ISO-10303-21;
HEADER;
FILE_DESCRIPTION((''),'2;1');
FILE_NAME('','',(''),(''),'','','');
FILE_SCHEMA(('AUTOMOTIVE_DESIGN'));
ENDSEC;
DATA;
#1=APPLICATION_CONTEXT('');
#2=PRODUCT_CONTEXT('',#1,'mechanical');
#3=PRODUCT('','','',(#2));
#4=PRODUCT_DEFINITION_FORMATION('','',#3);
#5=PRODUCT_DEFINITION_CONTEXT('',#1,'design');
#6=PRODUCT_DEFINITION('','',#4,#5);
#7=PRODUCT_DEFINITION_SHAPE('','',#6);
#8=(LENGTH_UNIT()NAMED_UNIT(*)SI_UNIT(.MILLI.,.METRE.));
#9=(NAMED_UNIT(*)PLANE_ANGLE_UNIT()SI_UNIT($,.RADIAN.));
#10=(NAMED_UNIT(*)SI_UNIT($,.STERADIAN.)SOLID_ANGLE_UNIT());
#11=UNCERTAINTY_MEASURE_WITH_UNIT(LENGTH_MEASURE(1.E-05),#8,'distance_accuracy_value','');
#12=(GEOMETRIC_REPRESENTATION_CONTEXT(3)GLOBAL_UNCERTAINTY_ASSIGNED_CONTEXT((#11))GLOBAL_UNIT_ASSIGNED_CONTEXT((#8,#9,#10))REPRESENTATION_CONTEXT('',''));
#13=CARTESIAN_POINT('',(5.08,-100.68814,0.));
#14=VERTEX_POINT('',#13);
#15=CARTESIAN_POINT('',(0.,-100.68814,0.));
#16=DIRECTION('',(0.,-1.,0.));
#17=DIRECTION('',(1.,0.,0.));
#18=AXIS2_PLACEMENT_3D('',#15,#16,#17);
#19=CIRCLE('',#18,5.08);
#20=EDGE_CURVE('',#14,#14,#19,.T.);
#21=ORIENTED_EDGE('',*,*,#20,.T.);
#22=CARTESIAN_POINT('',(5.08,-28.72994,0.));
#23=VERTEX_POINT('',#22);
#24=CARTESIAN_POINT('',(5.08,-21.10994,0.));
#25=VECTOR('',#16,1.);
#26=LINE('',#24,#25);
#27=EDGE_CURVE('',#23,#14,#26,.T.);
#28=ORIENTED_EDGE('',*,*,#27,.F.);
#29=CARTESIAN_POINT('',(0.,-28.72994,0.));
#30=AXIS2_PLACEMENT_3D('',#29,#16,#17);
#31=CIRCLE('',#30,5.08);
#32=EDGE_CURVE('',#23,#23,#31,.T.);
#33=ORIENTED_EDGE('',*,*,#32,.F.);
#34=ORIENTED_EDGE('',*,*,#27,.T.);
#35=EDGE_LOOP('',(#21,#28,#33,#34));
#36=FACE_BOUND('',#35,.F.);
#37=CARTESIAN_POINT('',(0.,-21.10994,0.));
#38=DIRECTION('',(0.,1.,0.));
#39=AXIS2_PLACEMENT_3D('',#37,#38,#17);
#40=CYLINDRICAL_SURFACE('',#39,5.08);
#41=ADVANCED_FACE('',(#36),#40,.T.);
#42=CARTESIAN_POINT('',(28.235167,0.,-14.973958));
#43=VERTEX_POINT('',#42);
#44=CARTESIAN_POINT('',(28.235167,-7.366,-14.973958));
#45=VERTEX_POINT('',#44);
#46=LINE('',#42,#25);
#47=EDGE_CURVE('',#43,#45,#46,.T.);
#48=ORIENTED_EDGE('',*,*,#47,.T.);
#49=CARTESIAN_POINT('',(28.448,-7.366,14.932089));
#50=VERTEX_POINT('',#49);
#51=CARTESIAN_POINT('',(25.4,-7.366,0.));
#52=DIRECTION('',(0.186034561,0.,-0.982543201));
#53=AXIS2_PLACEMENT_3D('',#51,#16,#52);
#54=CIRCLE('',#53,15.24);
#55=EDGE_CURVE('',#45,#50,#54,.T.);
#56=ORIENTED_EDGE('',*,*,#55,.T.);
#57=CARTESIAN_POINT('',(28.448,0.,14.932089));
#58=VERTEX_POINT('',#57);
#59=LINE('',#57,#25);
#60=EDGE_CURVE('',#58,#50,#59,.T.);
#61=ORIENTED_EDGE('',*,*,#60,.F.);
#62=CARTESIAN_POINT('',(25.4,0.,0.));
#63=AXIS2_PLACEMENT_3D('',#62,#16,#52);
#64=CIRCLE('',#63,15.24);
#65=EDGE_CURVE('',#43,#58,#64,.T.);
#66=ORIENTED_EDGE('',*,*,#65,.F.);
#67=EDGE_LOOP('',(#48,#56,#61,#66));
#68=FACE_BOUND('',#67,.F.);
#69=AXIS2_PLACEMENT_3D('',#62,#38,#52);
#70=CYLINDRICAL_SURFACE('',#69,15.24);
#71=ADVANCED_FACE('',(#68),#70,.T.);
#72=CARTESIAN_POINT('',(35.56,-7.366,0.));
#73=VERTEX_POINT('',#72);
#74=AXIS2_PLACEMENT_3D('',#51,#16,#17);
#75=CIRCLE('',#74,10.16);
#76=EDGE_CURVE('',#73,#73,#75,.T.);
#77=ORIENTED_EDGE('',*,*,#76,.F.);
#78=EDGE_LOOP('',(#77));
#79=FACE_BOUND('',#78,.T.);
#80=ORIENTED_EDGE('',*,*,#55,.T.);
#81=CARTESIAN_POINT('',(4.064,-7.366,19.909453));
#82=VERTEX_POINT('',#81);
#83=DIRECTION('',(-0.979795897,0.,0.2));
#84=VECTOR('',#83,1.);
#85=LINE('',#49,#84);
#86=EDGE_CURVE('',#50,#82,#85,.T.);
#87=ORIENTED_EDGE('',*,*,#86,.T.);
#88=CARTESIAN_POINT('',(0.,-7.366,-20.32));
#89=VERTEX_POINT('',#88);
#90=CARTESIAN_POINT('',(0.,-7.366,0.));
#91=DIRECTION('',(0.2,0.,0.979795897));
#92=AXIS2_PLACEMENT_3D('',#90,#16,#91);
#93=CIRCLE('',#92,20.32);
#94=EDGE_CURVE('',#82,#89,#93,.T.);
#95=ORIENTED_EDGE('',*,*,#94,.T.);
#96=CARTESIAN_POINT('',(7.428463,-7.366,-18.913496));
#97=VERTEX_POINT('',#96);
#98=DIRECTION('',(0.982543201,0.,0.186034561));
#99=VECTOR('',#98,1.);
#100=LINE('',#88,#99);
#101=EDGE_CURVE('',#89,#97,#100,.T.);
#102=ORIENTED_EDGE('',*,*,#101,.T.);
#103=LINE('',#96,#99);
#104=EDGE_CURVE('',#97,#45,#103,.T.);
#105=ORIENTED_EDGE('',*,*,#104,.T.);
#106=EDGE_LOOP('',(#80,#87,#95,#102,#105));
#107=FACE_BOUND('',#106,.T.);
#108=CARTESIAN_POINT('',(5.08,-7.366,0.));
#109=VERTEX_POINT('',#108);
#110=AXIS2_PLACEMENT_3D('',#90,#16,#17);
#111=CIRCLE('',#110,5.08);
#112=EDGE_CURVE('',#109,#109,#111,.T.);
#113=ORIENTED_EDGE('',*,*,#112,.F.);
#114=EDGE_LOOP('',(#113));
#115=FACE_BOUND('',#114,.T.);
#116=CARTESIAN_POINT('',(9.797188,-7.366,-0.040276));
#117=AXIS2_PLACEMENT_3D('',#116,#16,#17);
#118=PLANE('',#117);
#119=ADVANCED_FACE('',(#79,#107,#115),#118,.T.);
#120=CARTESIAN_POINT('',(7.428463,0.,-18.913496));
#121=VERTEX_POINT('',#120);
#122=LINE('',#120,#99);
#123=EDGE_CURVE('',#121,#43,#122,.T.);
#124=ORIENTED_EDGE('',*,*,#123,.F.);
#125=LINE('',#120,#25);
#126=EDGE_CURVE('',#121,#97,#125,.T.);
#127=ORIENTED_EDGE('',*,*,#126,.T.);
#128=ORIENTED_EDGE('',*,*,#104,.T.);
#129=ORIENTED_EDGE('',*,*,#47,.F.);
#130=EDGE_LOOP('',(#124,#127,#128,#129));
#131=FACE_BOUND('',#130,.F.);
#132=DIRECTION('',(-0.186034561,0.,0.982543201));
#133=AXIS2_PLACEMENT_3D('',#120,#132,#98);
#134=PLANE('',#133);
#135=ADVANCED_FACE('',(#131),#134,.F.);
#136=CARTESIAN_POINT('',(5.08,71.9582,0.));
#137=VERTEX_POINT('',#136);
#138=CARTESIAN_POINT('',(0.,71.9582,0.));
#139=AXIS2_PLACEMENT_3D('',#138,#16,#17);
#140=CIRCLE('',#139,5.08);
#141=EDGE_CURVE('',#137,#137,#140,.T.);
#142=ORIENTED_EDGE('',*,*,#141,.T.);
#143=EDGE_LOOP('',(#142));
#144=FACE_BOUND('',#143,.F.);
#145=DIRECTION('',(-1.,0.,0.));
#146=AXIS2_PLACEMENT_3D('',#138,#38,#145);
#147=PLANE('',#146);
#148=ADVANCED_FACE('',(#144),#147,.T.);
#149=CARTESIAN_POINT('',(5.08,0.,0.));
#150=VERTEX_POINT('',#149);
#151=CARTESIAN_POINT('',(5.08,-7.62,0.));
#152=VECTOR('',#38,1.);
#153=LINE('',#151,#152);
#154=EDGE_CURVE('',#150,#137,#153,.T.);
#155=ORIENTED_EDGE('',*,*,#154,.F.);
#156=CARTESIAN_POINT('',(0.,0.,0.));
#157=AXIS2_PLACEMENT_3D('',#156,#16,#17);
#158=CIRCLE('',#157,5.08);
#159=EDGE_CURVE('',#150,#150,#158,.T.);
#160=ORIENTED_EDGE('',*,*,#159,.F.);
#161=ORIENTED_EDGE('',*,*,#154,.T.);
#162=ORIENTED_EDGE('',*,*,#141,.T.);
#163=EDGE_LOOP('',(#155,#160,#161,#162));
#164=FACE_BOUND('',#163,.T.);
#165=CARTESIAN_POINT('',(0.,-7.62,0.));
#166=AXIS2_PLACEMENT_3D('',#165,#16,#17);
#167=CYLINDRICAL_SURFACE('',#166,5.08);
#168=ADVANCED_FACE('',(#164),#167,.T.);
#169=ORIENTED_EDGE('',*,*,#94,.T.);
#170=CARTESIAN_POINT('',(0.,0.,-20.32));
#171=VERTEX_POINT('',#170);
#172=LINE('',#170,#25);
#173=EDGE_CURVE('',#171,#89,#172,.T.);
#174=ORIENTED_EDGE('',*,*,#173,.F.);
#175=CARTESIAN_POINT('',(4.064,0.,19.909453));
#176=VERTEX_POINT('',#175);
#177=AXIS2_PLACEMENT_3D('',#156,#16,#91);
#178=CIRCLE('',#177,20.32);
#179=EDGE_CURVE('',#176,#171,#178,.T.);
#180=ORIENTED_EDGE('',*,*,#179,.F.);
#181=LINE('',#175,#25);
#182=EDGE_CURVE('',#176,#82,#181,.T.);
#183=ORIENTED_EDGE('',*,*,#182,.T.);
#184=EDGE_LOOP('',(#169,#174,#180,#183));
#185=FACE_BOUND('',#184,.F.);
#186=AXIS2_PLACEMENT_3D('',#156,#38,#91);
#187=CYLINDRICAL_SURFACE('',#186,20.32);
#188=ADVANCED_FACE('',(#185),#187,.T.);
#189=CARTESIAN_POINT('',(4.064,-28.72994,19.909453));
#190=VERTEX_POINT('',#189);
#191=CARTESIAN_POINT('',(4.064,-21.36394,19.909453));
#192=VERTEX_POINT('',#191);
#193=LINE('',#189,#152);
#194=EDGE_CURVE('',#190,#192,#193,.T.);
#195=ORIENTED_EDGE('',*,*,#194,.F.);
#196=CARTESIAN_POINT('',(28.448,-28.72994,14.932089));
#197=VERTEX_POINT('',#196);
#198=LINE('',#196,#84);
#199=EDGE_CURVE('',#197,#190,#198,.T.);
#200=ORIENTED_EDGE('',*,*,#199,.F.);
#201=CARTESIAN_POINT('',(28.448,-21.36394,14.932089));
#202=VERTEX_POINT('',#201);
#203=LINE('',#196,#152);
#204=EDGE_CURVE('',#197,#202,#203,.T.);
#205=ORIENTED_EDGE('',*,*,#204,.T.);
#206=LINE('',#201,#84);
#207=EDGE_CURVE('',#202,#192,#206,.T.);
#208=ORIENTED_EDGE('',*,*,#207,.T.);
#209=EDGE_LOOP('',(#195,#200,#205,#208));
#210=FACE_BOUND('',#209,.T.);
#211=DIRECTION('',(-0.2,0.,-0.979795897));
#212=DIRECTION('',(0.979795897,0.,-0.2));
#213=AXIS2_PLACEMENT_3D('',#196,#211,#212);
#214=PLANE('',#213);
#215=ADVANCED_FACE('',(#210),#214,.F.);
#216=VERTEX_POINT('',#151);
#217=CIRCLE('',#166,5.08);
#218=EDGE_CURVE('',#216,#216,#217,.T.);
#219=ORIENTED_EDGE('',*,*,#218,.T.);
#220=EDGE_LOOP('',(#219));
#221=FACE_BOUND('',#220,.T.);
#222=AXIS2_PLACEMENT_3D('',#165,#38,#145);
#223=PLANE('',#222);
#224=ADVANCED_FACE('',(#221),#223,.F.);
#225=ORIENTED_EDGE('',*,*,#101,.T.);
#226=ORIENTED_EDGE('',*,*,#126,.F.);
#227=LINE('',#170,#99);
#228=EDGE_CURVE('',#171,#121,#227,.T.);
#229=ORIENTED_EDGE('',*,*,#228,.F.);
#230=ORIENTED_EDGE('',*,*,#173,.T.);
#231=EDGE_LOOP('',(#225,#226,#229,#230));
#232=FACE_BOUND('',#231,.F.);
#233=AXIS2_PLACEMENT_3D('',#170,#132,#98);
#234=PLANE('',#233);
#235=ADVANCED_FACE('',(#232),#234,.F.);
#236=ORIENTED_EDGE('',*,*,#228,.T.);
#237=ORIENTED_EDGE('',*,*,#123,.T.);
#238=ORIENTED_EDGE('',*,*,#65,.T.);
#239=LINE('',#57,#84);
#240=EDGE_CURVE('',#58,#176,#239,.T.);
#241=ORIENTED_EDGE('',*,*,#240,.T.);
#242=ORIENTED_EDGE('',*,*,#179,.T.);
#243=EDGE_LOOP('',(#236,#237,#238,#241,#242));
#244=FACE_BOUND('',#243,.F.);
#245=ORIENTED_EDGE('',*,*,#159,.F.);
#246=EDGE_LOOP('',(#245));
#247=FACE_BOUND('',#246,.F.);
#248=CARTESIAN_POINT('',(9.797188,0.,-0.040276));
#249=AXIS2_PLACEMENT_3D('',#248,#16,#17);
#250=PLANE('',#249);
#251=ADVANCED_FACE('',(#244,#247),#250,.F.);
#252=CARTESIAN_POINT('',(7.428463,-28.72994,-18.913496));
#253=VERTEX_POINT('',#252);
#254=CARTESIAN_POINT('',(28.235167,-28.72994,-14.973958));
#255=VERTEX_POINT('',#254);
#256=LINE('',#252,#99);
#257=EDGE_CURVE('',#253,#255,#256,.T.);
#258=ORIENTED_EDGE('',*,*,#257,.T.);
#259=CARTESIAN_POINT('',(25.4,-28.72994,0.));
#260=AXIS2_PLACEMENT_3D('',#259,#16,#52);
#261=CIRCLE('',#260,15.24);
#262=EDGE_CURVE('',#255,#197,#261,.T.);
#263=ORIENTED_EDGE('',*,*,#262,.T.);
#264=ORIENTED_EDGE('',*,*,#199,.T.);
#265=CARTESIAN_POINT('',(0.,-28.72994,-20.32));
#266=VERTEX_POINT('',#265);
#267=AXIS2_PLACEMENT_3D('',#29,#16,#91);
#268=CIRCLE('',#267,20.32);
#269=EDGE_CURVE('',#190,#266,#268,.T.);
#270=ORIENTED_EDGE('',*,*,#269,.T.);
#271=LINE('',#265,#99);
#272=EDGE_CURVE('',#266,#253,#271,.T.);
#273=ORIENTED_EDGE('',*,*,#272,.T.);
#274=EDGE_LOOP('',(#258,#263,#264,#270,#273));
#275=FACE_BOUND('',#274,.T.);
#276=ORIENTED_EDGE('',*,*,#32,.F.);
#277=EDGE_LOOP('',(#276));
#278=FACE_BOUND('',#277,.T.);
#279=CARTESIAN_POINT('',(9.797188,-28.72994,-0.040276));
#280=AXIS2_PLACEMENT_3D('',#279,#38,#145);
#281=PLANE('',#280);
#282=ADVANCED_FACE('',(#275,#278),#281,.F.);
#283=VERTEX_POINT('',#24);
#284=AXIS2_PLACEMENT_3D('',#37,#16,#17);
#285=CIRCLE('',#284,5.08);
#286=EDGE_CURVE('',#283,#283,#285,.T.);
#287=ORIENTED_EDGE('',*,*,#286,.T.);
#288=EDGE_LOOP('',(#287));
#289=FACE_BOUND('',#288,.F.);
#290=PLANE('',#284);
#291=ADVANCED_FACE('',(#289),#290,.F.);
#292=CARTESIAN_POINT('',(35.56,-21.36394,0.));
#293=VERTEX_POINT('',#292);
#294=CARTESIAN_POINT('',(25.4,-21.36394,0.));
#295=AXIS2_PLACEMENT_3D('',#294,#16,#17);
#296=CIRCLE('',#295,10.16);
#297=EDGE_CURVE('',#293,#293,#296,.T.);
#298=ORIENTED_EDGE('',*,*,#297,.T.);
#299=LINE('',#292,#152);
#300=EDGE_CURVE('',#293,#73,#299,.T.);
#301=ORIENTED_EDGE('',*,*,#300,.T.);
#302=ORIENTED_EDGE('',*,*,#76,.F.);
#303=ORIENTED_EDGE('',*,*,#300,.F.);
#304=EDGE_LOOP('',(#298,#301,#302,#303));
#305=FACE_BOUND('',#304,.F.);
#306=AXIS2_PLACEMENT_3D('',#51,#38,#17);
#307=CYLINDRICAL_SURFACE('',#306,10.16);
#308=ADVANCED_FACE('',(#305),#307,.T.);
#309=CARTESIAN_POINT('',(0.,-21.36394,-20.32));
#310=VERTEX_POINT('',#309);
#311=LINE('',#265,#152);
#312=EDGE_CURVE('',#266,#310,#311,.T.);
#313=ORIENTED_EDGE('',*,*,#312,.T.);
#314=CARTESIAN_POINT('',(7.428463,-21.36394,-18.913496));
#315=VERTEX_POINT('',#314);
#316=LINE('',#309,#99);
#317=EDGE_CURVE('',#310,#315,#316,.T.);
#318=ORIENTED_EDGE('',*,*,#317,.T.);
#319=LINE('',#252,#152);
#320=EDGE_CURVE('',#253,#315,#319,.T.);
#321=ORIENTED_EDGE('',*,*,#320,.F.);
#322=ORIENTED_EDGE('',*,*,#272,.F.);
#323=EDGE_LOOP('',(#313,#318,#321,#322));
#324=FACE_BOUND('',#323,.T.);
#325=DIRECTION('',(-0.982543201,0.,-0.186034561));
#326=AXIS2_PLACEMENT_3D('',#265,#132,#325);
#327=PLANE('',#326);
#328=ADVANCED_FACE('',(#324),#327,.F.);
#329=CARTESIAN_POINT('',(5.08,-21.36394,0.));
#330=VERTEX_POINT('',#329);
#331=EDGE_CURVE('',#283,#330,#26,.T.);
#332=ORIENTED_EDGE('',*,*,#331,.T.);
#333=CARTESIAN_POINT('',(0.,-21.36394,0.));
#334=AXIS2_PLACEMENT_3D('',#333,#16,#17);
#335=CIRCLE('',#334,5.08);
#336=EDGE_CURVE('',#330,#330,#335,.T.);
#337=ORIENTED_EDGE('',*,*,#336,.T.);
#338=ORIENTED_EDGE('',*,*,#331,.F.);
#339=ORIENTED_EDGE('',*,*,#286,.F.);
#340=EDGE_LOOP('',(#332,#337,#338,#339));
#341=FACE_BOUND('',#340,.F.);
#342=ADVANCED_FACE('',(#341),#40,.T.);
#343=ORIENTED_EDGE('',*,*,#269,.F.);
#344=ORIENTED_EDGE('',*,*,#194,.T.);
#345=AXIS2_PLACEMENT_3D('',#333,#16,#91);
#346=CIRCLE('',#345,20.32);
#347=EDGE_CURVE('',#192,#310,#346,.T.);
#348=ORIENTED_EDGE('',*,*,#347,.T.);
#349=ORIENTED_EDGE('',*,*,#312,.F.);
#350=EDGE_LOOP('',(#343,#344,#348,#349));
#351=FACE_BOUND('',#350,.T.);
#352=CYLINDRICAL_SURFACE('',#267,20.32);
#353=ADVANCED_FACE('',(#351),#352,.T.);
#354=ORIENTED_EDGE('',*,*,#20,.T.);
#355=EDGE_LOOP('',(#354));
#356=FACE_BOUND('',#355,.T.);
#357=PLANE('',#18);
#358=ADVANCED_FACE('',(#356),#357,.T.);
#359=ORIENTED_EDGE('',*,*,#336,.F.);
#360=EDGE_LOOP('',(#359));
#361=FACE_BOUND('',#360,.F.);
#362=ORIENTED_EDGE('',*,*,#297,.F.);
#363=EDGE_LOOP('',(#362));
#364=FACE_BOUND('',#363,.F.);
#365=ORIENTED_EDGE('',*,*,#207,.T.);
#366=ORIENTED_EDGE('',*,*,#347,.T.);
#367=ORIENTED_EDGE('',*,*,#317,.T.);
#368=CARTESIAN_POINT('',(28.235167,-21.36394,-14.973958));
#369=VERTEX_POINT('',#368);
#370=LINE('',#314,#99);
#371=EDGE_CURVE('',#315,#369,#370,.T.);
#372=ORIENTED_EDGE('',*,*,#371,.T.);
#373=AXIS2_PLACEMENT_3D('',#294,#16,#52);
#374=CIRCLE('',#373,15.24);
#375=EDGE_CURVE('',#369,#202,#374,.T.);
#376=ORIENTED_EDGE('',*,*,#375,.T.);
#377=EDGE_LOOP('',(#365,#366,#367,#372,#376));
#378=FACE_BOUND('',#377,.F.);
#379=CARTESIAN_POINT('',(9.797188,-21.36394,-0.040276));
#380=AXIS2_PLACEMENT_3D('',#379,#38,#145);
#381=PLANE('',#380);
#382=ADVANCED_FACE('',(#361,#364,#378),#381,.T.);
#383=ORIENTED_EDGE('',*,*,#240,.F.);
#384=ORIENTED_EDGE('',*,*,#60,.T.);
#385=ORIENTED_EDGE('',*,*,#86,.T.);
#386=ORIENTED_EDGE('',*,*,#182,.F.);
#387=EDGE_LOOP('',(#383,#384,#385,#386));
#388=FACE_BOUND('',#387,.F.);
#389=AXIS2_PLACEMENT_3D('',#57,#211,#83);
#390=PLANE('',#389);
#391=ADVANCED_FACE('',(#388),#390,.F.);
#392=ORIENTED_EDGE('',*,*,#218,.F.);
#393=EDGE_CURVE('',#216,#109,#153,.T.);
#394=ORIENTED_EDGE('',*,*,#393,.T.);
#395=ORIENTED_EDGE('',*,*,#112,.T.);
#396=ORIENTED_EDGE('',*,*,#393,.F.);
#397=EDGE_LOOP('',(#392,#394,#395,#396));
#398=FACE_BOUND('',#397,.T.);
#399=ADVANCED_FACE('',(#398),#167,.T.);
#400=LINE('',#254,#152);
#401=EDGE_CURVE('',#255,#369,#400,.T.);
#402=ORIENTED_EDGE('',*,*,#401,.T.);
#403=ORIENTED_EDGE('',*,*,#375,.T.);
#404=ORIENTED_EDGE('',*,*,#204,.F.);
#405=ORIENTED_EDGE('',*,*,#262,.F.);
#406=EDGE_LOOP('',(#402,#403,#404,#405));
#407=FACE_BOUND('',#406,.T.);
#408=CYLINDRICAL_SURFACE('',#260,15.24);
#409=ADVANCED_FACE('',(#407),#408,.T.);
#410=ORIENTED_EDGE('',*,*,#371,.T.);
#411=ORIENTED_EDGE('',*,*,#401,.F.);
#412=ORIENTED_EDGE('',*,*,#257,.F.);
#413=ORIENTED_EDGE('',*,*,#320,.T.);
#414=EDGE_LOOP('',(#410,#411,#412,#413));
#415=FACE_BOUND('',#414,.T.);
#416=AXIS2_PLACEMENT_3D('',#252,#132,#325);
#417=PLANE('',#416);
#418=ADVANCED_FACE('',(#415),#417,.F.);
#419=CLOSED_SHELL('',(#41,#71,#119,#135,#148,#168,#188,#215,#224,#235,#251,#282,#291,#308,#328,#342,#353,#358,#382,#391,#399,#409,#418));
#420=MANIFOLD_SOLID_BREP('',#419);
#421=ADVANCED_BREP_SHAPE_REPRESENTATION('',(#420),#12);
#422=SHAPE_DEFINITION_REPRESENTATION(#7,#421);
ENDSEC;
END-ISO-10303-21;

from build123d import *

# Parameters (mm, degrees)
F0_R     = 5.08
F0_R_2   = 10.16
F1_DEPTH = 7.366
F2_R     = 10.16
F3_DEPTH = 6.99897
F7_R     = 5.08
F8_DEPTH = 79.5782


# Not quite as in the source:
# - a length typed as a fraction of an inch, garbled in the dataset ("3 / 203.2 mm" for 3/8 in), is restored


with BuildPart() as f1:
    # F0 (on Front) → F1 (new body)
    with BuildSketch(Plane.XZ):
        with BuildLine():
            Line((28.448, 14.932089472), (4.064, 19.9094526293))
            ThreePointArc((4.064, 19.9094526293), (-20.2171026291, 2.0423421079), (0, -20.32))
            Line((0, -20.32), (7.4284633963, -18.9134960166))
            Line((7.4284633963, -18.9134960166), (28.2351667085, -14.9739583856))
            ThreePointArc((28.2351667085, -14.9739583856), (40.639614078, -0.1084562307), (28.448, 14.932089472))
        make_face()
        Circle(F0_R, mode=Mode.SUBTRACT)
        with Locations((25.4, 0)):
            Circle(F0_R_2, mode=Mode.SUBTRACT)
        with Locations((25.4, 0)):
            Circle(F0_R_2)
    extrude(amount=F1_DEPTH)

    # F2 (on face) → F3 (join)
    with BuildSketch(Plane.XZ.offset(7.366)):
        with Locations((25.4, 0)):
            Circle(F2_R)
    extrude(amount=F3_DEPTH)

    # F5: F1 across plane


with BuildPart() as f1_1:
    add(f1.part)
    add(f1.part.mirror(Plane(origin=(25.4, -14.36497, 0), x_dir=(1, 0, 0), z_dir=(0, -1, 0))))

    # F7 (on offset) → F8 (join)
    with BuildSketch(Plane.XZ.offset(21.10994)):
        Circle(F7_R)
    extrude(amount=F8_DEPTH)

    # F9: F1 across plane


with BuildPart() as f1_2:
    add(f1_1.part)
    add(f1_1.part.mirror(Plane(origin=(25.4, -14.36497, 0), x_dir=(1, 0, 0), z_dir=(0, -1, 0))))


solid = f1_2.part
